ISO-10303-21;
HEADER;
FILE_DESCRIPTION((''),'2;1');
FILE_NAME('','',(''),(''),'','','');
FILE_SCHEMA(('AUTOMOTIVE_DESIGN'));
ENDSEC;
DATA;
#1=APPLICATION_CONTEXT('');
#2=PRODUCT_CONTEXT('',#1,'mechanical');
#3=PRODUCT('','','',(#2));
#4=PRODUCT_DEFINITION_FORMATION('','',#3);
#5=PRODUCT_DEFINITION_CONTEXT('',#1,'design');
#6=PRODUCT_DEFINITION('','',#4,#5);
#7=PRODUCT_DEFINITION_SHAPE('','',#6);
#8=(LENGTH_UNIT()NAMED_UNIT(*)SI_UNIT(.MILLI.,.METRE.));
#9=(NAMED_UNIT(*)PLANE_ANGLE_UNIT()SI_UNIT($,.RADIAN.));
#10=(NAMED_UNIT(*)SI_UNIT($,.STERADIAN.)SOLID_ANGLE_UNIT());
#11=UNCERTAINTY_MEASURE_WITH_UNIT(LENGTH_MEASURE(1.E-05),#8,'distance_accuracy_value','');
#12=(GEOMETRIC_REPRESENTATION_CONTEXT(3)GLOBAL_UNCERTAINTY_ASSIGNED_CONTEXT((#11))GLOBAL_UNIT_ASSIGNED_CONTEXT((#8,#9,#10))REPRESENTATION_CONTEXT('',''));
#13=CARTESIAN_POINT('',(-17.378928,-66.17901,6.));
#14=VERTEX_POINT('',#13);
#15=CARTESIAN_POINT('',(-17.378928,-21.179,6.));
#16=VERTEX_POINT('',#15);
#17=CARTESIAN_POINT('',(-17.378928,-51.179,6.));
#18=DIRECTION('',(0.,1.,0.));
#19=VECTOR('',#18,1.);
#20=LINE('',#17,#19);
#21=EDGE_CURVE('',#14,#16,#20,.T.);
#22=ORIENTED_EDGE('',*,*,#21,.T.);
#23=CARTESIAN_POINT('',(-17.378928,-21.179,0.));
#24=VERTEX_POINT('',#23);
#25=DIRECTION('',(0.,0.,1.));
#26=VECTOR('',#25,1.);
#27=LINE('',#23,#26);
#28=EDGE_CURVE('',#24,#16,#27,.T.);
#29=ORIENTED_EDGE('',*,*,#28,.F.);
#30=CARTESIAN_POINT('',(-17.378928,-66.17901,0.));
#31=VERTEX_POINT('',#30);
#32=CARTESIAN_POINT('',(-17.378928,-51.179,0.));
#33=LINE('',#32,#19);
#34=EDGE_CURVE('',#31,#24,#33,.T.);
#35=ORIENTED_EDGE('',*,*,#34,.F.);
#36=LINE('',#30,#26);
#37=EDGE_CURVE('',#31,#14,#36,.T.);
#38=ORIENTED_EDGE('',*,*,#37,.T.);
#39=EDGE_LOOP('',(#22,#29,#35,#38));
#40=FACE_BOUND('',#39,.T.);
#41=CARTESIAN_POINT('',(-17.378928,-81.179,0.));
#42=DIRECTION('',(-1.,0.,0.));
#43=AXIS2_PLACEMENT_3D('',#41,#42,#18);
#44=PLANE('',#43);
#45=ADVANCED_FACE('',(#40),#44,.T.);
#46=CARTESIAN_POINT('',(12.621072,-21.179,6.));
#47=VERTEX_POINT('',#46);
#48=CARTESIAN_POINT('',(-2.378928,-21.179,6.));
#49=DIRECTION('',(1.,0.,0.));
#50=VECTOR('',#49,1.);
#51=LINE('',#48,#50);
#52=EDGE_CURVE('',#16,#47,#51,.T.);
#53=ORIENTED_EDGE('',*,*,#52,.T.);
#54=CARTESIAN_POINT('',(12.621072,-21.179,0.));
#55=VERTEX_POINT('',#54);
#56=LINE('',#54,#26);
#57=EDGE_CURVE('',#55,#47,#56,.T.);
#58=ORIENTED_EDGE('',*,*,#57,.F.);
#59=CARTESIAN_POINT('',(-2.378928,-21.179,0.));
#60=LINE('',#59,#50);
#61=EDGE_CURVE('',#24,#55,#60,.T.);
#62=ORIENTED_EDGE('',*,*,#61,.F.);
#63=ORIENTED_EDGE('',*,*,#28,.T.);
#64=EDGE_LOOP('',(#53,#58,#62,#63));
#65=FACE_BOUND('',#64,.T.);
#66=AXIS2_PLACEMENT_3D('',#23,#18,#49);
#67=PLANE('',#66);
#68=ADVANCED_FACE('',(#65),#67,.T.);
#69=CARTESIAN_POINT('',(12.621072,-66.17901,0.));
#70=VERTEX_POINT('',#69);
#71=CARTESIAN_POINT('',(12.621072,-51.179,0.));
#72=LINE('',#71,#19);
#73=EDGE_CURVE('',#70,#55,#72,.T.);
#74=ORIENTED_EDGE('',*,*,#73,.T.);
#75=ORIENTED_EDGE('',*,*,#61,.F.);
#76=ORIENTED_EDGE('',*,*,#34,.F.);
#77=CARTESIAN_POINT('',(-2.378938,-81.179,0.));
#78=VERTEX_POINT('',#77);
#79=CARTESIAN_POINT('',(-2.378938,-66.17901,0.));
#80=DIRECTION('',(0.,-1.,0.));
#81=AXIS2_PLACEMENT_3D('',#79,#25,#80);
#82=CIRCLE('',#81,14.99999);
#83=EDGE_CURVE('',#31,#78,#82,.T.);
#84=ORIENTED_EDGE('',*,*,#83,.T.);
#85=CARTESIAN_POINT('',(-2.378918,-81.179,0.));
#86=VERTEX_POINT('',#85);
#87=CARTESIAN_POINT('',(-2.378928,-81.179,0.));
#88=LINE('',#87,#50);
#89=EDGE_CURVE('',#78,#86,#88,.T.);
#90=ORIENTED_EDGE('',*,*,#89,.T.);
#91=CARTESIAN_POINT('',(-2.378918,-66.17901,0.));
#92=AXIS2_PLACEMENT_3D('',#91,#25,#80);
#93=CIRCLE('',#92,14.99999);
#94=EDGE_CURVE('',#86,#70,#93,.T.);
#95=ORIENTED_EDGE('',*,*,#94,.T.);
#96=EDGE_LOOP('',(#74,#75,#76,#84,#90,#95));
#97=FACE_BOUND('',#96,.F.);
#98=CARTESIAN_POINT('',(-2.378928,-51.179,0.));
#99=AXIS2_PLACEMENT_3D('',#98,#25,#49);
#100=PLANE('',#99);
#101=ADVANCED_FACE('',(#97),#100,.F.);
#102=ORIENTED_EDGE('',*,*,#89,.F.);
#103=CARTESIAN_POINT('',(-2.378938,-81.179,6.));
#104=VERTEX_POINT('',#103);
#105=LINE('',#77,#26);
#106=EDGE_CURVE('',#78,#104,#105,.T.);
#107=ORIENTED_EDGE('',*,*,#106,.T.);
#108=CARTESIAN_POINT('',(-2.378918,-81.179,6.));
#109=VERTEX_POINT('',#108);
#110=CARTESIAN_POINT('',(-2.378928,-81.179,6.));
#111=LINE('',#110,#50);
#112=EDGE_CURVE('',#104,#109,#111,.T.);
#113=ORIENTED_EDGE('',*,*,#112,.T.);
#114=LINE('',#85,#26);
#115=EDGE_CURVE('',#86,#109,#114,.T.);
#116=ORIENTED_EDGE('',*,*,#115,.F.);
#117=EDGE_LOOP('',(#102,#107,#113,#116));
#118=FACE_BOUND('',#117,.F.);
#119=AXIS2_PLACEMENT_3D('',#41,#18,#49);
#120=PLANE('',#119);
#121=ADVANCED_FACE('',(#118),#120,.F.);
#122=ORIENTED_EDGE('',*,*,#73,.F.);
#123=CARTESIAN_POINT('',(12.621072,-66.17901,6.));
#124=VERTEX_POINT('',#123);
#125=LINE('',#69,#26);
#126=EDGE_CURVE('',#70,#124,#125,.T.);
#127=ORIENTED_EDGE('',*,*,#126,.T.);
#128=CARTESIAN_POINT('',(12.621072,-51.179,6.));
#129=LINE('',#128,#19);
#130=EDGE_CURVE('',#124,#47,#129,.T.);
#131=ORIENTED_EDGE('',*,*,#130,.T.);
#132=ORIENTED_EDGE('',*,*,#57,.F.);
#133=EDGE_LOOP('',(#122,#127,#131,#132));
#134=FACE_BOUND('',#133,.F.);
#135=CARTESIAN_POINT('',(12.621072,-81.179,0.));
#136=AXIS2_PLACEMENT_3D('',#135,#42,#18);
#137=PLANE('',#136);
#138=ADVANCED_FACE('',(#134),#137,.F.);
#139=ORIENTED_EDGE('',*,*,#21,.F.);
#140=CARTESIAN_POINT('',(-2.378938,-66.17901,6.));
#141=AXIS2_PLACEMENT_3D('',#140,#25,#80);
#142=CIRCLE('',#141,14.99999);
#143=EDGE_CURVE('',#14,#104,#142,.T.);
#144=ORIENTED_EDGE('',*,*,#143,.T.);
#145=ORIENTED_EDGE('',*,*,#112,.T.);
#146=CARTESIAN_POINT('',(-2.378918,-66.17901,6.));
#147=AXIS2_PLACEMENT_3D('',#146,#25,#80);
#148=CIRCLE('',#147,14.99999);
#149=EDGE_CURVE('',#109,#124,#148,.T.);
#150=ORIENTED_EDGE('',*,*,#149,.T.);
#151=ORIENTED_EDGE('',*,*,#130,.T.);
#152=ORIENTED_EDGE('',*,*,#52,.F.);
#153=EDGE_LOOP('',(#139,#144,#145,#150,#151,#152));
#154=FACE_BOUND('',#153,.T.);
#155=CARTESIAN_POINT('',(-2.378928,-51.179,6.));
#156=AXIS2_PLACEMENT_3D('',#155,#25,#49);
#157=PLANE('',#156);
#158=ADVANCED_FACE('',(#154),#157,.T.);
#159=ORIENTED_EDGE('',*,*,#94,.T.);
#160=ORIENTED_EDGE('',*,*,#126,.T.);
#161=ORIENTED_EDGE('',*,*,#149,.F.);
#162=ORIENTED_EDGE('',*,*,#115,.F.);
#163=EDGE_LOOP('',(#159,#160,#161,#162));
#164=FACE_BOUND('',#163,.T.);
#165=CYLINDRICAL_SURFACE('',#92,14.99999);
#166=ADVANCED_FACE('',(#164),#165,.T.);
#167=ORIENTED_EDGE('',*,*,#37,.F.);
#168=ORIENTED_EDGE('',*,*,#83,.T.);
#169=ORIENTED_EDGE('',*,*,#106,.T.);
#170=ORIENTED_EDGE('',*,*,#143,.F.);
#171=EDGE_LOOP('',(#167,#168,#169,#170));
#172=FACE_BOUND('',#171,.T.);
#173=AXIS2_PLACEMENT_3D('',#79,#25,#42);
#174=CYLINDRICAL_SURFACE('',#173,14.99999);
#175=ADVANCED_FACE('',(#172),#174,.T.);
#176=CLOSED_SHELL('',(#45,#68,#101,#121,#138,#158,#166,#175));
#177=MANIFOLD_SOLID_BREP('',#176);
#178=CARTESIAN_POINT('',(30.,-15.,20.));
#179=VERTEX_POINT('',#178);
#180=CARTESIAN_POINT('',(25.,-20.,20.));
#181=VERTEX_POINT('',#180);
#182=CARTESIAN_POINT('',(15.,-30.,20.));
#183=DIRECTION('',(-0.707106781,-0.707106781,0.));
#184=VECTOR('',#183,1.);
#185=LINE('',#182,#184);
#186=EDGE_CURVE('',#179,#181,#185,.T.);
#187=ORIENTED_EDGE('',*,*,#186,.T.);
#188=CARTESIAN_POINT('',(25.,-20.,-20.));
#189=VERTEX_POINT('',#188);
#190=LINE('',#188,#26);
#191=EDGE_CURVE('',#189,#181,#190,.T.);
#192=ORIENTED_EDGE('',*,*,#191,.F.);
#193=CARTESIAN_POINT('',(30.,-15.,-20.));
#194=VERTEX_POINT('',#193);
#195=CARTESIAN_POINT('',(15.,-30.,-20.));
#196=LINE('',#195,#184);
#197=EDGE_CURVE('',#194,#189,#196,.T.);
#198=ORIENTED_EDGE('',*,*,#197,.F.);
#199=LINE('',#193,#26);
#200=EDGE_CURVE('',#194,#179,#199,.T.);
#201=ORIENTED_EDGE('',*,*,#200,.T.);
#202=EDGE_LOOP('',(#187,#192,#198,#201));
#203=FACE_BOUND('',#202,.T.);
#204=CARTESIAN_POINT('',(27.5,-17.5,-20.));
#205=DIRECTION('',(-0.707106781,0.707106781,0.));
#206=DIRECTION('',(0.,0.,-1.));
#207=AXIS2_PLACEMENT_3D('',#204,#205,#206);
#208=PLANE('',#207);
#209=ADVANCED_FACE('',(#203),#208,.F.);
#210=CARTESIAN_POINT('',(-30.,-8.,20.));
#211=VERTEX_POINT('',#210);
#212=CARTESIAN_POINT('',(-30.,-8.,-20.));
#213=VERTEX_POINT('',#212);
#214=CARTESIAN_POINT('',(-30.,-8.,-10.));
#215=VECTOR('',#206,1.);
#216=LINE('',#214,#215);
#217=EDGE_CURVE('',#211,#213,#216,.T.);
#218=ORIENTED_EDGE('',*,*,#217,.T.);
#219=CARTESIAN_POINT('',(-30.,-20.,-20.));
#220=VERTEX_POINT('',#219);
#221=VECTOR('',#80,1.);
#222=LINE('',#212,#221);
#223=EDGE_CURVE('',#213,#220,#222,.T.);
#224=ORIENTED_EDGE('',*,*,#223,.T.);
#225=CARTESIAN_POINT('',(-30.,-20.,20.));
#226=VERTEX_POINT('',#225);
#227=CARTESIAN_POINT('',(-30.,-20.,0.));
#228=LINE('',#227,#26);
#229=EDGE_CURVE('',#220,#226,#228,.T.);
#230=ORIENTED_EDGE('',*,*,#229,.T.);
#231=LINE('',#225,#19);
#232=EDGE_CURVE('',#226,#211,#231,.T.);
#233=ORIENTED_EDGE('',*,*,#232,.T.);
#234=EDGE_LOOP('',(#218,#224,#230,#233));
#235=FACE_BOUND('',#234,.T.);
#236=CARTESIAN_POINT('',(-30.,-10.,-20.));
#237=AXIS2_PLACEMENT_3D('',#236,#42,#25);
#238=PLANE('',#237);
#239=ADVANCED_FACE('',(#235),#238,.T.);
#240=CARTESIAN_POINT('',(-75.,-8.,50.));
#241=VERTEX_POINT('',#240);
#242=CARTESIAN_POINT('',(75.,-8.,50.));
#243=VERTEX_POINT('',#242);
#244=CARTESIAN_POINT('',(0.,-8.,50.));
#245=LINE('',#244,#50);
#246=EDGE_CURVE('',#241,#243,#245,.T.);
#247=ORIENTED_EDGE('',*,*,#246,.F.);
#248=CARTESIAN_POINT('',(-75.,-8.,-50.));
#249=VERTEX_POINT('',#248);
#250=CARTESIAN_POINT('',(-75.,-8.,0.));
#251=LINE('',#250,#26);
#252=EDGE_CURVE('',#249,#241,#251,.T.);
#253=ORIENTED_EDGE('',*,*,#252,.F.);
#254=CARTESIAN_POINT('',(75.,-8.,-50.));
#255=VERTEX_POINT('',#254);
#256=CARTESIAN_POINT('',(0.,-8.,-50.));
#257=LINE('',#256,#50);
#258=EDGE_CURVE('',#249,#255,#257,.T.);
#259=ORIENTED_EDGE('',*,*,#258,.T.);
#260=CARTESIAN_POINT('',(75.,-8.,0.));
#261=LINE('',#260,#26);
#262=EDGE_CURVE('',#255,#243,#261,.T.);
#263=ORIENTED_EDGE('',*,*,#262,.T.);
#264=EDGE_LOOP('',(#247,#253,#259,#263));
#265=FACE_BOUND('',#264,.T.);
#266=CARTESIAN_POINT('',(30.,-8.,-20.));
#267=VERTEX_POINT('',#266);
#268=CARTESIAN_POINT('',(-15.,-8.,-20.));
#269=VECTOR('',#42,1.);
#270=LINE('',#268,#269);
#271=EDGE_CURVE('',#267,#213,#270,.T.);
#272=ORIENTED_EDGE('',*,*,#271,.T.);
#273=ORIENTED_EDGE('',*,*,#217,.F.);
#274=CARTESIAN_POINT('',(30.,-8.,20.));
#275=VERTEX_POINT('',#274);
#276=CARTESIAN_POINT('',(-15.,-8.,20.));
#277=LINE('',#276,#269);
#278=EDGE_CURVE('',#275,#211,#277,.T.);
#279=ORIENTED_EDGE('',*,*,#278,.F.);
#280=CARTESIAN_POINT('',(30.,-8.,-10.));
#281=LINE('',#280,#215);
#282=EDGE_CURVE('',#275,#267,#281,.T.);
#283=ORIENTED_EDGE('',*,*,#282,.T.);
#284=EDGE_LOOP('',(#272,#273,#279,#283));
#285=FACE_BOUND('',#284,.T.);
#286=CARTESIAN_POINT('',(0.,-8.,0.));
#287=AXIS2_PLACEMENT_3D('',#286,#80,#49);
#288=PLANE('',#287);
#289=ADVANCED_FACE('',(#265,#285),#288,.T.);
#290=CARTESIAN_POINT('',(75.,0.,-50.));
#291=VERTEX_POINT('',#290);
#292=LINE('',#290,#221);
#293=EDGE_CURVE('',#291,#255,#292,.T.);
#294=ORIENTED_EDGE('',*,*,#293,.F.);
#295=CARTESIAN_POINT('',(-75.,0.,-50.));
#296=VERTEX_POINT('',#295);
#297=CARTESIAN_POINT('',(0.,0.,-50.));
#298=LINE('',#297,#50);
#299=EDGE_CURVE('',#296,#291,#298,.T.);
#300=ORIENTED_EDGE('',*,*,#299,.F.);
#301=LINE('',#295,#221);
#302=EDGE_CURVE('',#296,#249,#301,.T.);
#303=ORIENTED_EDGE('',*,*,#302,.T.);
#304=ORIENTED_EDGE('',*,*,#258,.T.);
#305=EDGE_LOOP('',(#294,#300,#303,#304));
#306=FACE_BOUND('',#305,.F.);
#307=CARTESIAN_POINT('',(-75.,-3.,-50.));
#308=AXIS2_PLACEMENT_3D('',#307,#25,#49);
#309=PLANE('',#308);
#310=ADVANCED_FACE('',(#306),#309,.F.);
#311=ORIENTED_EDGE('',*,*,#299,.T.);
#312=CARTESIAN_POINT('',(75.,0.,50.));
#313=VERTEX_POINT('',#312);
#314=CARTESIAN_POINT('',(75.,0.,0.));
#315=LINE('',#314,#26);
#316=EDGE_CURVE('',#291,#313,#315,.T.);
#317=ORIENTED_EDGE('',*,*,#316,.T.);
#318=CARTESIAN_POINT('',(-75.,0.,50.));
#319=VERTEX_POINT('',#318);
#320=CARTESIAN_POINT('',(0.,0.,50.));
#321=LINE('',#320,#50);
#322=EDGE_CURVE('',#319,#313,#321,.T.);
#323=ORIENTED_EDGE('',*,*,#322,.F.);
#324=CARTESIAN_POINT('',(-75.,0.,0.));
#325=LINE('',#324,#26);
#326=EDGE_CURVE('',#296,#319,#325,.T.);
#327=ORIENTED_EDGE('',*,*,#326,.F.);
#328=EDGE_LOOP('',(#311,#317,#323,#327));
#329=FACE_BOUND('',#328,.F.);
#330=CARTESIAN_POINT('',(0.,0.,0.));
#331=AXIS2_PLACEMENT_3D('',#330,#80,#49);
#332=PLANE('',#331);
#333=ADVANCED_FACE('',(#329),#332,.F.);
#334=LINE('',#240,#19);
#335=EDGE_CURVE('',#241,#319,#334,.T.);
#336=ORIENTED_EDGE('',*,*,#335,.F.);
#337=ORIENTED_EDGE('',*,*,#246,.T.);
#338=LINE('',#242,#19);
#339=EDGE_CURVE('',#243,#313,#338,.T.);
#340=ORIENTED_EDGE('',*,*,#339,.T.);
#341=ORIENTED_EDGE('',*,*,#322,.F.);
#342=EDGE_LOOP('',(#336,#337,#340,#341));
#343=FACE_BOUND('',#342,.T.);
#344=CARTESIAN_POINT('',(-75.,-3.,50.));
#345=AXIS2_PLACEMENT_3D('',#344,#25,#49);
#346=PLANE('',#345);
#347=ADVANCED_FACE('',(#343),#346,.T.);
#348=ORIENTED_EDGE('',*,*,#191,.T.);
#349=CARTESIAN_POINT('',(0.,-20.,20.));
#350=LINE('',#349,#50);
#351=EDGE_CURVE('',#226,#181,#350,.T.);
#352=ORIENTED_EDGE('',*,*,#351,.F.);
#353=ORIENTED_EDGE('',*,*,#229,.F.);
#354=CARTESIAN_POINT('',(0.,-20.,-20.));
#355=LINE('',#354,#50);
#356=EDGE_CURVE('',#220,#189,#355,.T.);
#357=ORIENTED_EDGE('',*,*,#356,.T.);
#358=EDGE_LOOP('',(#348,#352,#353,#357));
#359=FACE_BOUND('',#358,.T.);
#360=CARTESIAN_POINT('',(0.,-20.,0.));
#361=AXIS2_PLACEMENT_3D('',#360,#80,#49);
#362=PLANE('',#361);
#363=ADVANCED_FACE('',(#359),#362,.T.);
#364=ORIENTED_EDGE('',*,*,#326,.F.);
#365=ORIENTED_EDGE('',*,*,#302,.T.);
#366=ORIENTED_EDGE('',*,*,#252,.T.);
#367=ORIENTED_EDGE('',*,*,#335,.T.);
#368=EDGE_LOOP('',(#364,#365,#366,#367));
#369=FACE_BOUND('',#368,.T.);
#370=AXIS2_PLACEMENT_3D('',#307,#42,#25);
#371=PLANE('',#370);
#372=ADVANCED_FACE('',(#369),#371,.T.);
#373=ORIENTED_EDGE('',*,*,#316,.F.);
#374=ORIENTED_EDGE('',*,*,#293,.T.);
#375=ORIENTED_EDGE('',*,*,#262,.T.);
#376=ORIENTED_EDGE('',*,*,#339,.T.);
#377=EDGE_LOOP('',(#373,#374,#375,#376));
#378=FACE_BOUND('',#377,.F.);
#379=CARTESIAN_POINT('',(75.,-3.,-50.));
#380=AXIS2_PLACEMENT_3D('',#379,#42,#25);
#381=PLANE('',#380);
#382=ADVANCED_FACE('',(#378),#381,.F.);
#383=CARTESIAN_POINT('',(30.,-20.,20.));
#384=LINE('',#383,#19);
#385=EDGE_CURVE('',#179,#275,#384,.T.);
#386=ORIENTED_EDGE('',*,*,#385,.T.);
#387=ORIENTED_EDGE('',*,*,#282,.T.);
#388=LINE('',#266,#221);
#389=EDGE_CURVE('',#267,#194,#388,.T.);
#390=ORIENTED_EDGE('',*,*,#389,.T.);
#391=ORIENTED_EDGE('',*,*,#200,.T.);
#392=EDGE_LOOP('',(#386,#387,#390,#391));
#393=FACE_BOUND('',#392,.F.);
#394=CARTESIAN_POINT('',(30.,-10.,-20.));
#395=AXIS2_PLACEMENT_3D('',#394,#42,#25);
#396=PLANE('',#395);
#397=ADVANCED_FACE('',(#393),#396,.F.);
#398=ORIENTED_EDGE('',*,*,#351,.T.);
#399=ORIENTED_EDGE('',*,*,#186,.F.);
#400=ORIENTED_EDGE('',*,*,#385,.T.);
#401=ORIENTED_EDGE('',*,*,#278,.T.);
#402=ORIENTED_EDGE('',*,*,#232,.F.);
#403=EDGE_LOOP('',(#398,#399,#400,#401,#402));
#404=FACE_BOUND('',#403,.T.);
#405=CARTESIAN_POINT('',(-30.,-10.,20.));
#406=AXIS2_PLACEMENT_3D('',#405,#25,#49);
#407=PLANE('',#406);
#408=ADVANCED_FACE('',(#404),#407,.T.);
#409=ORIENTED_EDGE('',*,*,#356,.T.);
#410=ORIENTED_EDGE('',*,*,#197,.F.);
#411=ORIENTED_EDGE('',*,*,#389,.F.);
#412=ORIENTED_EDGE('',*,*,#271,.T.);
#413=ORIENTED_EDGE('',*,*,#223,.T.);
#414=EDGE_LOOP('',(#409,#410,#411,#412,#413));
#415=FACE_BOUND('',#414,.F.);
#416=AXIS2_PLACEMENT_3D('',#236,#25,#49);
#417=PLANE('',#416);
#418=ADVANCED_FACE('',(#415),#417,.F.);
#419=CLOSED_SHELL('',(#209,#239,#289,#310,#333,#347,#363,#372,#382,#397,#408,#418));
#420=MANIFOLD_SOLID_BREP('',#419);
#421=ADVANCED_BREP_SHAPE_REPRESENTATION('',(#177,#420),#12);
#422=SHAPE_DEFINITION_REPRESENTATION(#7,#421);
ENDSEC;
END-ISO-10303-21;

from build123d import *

# Parameters (mm, degrees)
F0_W     = 150
F0_H     = 100
F1_DEPTH = 3
F2_DEPTH = 5
F3_W     = 60
F3_H     = 40
F4_DEPTH = 10
F5_DEPTH = 10
F6_SIZE  = 5
F7_W     = 30
F7_H     = 60
F8_DEPTH = 6
F9_R     = 14.99999


# Not quite as in the source:
# - a fillet or chamfer is up to 0.001 mm smaller than in the source, because OpenCascade refuses the exact size


with BuildPart() as f1:
    # F0 (on Front) → F1 (new body)
    with BuildSketch(Plane.XZ):
        Rectangle(F0_W, F0_H)
    extrude(amount=F1_DEPTH)

    # F2 (add): a face of the model
    f2_faces = [f1.faces().sort_by_distance(p)[0] for p in [
        (0, -3, 0),
    ]]
    extrude(f2_faces, amount=F2_DEPTH)

    # F3 (on Front) → F4 (join)
    with BuildSketch(Plane.XZ):
        Rectangle(F3_W, F3_H)
    extrude(amount=F4_DEPTH)

    # F5 (add): a face of the model
    f5_faces = [f1.faces().sort_by_distance(p)[0] for p in [
        (0, -10, 0),
    ]]
    extrude(f5_faces, amount=F5_DEPTH)

    # F6
    f6_edges = [f1.edges().sort_by_distance(p)[0] for p in [
        (30, -20, 0),
    ]]
    chamfer(f6_edges, length=F6_SIZE)


with BuildPart() as f8:
    # F7 (on Top) → F8 (new body)
    with BuildSketch(Plane.XY):
        with Locations((-2.3789281398, -51.1790004373)):
            Rectangle(F7_W, F7_H)
    extrude(amount=F8_DEPTH)

    # F9 (radius 15 in the source; OpenCascade refuses exactly that, so slightly less here)
    f9_edges = [f8.edges().sort_by_distance(p)[0] for p in [
        (12.621072, -81.179, 3),
        (-17.378928, -81.179, 3),
    ]]
    fillet(f9_edges, radius=F9_R)


solid = Compound([f1.part, f8.part])
